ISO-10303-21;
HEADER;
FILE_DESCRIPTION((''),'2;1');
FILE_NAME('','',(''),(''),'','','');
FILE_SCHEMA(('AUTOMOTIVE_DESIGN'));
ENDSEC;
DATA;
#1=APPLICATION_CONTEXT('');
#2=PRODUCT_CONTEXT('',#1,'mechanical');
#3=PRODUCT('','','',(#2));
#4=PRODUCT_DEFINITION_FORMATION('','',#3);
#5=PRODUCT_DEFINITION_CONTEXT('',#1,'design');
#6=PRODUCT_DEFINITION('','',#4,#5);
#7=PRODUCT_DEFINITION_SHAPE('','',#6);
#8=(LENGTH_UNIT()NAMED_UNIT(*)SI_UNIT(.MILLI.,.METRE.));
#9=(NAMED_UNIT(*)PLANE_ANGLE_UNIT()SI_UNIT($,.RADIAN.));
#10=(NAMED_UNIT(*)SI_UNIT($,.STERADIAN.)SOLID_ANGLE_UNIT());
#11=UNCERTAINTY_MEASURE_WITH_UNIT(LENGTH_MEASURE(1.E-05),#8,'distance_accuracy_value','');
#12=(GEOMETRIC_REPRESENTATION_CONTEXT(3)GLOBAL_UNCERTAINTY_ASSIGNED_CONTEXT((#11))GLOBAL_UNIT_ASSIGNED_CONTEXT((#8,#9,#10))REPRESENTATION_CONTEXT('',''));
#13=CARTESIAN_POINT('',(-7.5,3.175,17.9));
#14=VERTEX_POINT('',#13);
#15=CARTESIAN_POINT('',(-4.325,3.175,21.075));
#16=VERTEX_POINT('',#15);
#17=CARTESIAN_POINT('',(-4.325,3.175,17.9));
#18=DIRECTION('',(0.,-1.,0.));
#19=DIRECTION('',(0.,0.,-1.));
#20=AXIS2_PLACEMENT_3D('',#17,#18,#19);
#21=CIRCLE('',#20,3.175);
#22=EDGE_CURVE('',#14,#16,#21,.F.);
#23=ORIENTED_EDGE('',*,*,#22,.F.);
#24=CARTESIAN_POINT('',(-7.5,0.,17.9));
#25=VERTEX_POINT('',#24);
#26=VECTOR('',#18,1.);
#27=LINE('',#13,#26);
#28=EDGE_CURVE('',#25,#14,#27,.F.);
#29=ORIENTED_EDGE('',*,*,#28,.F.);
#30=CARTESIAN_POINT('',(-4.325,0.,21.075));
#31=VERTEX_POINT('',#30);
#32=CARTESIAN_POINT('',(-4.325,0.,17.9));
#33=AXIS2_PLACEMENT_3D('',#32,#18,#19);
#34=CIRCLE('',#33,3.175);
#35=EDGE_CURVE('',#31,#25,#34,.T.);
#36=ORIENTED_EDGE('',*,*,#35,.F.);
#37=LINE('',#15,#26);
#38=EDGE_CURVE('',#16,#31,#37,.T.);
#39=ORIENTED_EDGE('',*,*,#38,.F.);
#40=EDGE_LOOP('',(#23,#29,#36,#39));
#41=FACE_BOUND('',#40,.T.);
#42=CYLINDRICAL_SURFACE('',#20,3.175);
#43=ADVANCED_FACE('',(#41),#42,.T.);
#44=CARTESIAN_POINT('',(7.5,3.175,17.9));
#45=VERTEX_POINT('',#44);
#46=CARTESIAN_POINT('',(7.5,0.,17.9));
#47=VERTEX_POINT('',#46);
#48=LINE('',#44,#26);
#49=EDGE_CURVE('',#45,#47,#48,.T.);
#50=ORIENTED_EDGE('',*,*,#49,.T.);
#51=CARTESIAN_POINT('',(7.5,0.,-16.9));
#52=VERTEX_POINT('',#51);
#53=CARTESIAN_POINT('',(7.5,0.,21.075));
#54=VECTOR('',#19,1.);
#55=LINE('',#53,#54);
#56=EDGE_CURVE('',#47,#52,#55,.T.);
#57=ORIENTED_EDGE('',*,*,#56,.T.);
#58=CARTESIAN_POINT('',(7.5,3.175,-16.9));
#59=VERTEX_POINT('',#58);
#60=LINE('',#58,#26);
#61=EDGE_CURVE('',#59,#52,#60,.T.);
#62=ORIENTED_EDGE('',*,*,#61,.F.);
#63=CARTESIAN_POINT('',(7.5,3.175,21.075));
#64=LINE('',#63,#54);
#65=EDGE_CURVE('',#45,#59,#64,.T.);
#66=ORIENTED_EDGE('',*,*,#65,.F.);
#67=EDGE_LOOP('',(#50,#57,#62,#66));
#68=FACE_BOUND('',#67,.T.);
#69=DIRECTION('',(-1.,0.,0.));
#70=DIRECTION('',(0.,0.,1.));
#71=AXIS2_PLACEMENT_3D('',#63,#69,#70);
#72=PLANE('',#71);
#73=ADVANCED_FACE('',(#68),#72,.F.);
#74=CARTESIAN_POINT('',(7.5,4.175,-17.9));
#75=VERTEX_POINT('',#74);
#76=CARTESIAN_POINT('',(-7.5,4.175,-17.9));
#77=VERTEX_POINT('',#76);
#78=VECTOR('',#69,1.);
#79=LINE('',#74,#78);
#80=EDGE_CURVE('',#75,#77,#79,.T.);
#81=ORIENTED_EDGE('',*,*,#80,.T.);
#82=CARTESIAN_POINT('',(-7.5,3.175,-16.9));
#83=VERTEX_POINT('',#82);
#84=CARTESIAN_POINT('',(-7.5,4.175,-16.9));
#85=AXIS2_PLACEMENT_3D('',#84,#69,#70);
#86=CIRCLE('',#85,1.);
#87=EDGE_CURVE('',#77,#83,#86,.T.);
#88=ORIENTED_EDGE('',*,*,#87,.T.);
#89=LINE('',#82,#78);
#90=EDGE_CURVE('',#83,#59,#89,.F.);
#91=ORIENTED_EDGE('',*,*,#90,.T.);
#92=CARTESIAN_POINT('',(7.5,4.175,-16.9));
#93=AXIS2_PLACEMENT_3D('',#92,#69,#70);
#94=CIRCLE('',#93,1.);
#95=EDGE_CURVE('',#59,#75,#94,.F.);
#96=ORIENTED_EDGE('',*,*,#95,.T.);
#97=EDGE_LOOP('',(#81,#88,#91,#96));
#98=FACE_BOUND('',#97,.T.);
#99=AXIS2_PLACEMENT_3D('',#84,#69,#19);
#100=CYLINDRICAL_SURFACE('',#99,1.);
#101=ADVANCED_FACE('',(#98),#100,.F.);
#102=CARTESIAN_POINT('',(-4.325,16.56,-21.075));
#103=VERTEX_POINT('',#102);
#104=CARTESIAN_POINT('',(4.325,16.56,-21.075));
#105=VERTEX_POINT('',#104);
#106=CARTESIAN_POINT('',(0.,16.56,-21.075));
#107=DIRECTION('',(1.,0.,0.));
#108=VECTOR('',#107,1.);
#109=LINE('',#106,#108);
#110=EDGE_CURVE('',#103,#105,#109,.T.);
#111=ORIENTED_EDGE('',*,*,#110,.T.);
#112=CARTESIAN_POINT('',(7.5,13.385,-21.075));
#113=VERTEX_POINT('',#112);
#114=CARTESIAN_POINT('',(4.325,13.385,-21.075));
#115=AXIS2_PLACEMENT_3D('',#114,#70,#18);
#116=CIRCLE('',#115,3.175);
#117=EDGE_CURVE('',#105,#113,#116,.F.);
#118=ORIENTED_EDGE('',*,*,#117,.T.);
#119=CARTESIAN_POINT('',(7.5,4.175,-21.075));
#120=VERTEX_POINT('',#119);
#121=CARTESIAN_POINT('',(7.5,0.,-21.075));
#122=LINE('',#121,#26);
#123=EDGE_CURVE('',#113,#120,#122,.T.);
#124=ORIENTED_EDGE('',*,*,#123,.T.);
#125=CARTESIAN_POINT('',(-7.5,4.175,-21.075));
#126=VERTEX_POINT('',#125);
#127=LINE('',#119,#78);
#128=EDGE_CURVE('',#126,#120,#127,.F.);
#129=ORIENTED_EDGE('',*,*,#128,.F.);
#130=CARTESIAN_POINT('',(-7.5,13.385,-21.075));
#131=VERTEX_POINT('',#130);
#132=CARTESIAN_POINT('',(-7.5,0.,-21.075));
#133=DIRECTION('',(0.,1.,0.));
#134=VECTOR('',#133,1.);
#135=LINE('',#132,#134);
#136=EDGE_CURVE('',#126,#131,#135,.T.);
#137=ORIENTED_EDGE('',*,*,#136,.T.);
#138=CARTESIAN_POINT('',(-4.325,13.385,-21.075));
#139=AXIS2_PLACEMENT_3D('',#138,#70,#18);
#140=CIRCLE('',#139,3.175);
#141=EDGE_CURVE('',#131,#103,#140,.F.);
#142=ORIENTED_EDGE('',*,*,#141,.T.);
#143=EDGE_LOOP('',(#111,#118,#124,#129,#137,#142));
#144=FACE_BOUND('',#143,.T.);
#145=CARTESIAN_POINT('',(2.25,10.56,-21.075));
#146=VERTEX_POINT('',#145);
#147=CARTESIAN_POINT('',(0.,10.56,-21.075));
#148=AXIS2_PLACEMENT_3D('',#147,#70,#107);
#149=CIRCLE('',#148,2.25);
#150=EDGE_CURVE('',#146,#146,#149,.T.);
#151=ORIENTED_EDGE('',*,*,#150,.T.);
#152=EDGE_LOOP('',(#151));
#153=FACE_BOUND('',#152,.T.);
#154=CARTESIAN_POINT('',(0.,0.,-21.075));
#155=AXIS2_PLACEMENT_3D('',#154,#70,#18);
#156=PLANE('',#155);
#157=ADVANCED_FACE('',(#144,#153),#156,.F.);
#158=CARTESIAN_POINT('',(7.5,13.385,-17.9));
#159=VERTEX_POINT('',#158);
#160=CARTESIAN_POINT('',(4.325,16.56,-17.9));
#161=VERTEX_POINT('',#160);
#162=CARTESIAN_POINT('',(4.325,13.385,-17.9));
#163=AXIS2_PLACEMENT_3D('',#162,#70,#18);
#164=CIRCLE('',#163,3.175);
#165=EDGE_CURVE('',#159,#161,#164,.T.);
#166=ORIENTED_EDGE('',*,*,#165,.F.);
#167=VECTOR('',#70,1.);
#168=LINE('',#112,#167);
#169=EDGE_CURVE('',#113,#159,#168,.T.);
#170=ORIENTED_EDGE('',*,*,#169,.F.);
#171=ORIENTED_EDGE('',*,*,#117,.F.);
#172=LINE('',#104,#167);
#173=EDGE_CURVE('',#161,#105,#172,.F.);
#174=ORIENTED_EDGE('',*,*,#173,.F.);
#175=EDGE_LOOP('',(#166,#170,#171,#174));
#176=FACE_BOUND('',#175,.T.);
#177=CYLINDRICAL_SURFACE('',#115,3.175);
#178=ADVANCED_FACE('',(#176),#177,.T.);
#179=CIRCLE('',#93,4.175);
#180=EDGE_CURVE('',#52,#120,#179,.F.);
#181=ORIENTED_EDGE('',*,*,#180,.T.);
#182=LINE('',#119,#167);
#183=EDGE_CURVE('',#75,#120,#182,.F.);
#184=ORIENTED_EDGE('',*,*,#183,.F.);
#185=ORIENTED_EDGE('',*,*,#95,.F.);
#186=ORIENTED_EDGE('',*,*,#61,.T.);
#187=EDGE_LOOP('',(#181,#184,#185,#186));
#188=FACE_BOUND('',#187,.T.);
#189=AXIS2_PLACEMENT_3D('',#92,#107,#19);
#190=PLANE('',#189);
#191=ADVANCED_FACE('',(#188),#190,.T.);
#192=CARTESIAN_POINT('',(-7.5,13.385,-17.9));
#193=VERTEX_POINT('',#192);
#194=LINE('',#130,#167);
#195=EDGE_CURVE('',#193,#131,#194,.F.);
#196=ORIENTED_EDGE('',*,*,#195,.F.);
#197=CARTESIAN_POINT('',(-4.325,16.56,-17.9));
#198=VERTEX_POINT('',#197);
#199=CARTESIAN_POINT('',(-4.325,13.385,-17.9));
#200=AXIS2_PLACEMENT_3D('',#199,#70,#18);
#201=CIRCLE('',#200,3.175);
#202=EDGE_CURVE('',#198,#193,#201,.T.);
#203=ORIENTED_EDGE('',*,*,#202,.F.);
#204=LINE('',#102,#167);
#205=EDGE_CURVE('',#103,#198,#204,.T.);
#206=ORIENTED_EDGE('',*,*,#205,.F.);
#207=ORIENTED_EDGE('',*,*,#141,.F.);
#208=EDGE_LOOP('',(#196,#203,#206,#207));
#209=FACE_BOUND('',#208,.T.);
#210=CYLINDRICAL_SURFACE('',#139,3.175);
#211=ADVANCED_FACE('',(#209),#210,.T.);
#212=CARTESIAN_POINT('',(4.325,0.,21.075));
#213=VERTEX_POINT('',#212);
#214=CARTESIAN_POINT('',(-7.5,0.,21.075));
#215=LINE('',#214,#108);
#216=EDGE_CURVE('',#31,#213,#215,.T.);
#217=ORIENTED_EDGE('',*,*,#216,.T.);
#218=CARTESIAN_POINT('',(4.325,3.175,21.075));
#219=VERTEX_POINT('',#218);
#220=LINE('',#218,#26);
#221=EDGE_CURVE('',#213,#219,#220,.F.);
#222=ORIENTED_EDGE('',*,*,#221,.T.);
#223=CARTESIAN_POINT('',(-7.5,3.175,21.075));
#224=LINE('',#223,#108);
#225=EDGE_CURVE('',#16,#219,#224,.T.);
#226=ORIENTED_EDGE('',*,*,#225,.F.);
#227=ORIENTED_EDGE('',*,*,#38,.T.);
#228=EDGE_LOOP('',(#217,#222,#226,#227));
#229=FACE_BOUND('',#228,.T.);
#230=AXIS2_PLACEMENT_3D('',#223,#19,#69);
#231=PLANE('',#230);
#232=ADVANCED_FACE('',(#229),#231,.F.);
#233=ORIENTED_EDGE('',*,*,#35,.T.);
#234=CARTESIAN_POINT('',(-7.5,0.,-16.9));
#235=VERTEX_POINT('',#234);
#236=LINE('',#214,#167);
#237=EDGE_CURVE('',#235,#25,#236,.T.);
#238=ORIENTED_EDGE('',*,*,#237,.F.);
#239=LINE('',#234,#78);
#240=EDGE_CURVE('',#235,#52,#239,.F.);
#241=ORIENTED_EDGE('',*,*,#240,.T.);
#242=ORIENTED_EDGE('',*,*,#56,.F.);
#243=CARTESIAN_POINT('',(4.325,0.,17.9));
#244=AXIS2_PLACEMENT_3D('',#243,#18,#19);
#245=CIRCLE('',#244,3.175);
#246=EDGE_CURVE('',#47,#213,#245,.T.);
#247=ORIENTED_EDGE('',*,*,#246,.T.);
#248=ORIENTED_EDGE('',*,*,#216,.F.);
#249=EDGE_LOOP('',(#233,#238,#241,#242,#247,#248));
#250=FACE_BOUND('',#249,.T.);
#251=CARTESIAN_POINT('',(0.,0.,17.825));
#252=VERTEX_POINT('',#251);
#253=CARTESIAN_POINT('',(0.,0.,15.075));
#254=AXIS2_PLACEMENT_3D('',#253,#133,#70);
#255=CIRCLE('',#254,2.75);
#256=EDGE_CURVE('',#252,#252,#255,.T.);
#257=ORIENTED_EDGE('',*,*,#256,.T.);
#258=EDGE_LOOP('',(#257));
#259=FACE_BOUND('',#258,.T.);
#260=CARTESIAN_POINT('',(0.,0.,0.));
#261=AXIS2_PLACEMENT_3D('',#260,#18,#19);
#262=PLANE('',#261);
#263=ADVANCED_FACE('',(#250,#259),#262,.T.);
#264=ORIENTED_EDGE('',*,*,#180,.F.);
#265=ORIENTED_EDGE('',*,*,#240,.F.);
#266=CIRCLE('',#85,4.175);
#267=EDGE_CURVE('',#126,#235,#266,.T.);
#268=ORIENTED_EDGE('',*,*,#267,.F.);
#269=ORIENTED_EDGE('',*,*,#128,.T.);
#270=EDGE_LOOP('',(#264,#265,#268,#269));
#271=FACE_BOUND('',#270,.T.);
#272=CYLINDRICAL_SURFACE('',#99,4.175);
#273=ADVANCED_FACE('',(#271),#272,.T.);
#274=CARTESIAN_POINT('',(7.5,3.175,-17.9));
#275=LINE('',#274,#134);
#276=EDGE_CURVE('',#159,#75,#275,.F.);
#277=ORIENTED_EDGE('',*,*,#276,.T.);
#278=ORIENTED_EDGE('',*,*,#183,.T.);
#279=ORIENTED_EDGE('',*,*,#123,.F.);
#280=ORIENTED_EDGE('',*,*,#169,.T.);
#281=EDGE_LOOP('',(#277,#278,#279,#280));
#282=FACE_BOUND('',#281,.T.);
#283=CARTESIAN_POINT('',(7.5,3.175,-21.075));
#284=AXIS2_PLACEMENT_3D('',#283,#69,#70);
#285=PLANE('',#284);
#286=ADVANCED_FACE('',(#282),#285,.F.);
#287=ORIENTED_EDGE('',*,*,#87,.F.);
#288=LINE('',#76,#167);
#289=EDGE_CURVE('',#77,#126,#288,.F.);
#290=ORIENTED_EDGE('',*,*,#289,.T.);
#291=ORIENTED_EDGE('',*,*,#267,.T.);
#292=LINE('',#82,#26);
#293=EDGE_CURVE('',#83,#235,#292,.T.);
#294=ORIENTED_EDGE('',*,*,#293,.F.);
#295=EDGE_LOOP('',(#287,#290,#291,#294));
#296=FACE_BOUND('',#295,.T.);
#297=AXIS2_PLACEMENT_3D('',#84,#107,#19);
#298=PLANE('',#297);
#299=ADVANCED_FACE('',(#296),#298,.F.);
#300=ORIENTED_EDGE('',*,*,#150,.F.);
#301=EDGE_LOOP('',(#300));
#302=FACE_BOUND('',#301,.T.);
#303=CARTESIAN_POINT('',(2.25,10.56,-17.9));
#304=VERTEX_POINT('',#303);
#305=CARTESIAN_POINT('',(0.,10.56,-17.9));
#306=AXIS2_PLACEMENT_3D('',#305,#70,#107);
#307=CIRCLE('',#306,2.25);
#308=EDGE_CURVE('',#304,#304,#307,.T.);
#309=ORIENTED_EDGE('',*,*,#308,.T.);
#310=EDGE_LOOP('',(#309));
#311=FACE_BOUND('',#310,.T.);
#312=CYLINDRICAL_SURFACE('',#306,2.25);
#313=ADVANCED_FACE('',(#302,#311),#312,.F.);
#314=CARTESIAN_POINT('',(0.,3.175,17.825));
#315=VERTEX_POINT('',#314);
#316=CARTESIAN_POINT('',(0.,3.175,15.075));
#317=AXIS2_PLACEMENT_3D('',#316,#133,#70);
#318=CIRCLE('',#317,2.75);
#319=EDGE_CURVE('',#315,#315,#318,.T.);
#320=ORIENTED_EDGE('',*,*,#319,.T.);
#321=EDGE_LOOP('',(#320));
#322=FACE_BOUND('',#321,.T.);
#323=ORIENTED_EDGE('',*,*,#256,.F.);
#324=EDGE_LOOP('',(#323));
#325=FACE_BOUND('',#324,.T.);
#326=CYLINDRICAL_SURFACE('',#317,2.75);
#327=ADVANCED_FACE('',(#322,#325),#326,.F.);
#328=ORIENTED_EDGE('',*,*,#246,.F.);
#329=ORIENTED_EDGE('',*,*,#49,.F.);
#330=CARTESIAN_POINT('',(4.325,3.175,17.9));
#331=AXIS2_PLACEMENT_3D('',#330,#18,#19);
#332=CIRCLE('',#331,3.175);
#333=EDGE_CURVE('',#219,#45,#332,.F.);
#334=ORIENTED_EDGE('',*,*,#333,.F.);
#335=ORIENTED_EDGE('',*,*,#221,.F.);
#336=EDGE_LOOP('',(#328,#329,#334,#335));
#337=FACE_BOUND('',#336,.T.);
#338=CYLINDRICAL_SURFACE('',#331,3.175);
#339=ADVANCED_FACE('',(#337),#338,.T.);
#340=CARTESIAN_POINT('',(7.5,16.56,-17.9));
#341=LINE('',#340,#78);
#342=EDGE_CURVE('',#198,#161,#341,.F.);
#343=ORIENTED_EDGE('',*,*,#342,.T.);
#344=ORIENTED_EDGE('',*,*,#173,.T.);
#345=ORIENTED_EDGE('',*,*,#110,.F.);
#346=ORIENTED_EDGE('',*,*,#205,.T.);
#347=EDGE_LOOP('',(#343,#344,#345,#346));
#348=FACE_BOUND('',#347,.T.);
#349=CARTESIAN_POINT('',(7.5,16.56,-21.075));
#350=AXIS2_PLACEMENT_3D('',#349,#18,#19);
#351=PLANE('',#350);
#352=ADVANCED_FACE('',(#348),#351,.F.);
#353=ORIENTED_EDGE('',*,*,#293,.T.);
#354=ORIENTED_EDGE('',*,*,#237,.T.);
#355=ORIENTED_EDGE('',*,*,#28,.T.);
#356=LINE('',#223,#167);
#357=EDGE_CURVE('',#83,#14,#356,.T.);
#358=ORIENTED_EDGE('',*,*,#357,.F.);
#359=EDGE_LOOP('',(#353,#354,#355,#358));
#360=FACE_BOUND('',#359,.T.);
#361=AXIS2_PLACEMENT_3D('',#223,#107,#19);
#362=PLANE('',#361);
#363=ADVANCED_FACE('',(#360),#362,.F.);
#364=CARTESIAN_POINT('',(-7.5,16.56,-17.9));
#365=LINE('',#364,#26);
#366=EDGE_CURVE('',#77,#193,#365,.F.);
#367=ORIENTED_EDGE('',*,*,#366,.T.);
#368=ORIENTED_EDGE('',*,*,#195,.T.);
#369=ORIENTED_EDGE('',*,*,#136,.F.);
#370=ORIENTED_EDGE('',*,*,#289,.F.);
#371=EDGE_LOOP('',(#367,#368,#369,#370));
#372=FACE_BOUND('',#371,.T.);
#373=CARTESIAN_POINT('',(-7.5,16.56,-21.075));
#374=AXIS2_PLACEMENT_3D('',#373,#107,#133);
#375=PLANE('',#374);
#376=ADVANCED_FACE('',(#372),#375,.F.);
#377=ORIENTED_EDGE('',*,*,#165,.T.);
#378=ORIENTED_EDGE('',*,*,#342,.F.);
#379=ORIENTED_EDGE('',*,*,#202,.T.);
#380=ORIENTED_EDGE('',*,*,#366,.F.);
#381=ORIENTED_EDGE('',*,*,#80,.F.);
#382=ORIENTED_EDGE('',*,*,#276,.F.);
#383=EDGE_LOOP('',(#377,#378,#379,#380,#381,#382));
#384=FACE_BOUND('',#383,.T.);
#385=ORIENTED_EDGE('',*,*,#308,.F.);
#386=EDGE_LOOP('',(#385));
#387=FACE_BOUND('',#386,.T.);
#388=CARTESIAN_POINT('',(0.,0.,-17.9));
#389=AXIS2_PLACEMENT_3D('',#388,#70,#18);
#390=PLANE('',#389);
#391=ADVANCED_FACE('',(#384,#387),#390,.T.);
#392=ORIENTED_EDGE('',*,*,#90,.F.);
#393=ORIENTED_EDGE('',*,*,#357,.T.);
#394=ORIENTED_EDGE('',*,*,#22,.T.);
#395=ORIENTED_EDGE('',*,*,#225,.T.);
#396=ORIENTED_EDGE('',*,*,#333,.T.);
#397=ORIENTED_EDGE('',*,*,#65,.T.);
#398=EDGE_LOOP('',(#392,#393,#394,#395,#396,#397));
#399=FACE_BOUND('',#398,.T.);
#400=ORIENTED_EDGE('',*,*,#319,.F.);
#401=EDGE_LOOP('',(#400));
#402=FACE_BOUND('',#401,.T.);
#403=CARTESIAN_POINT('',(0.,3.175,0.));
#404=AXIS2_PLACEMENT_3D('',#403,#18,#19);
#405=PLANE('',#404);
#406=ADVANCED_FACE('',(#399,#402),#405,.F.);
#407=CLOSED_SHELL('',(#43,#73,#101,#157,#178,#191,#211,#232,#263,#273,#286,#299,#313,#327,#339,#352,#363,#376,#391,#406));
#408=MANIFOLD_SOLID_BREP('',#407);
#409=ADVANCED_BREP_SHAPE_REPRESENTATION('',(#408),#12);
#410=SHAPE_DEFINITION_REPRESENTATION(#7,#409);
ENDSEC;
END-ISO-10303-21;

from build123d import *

# Parameters (mm, degrees)
SKETCH1_W                    = 15
SKETCH1_H                    = 42.15
BASE_FLANGE1_DEPTH           = 3.175
EDGE_FLANGE1_STRIP_W         = 14.7
EDGE_FLANGE1_STRIP_H         = 3.175
EDGE_FLANGE1_STRIP_CUT_DEPTH = 15
EDGE_FLANGE1_DEPTH           = 15
M5_CLEARANCE_HOLE1_D         = 5.5
M4_CLEARANCE_HOLE1_D         = 4.5
FILLET1_R                    = 3.175


# Sheet-metal steps are written as plain solids
with BuildPart() as part:
    # Sketch1 → Base-Flange1 (new body)
    with BuildSketch(Plane(origin=(0, 0, 0), x_dir=(1, 0, 0), z_dir=(0, 1, 0))):
        Rectangle(SKETCH1_W, SKETCH1_H)
    extrude(amount=BASE_FLANGE1_DEPTH)

    # Edge-Flange1 strip (across the edge) → Edge-Flange1 strip cut (cut)
    with BuildSketch(Plane(origin=(7.5, 3.175, -21.075), x_dir=(0, 0, 1), z_dir=(-1, 0, 0))):
        with Locations((-3.175, -1.5875)):
            Rectangle(EDGE_FLANGE1_STRIP_W, EDGE_FLANGE1_STRIP_H)
    extrude(amount=EDGE_FLANGE1_STRIP_CUT_DEPTH, mode=Mode.SUBTRACT)

    # Edge-Flange1 section (across the edge) → Edge-Flange1 (add)
    with BuildSketch(Plane(origin=(7.5, 3.175, -21.075), x_dir=(0, 0, 1), z_dir=(-1, 0, 0))):
        with BuildLine():
            Line((0, 1), (0, 13.385))
            Line((0, 13.385), (3.175, 13.385))
            Line((3.175, 13.385), (3.175, 1))
            ThreePointArc((3.175, 1), (3.467893219, 0.292893219), (4.175, 0))
            Line((4.175, 0), (4.175, -3.175))
            ThreePointArc((4.175, -3.175), (1.222829189, -1.952170811), (0, 1))
        make_face()
    extrude(amount=EDGE_FLANGE1_DEPTH)

    # M5 Clearance Hole1 (through all)
    with Locations(Plane(origin=(0, 3.175, 0), x_dir=(1, 0, 0), z_dir=(0, 1, 0))):
        with Locations((0, -15.075)):
            Hole(M5_CLEARANCE_HOLE1_D / 2)

    # M4 Clearance Hole1 (through all)
    with Locations(Plane.XY.offset(-17.9)):
        with Locations((0, 10.56)):
            Hole(M4_CLEARANCE_HOLE1_D / 2)

    # Fillet1
    fillet1_edges = [part.edges().sort_by_distance(p)[0] for p in [
        (7.5, 16.56, -19.4875),
        (-7.5, 16.56, -19.4875),
        (7.5, 1.5875, 21.075),
        (-7.5, 1.5875, 21.075),
    ]]
    fillet(fillet1_edges, radius=FILLET1_R)


solid = part.part
